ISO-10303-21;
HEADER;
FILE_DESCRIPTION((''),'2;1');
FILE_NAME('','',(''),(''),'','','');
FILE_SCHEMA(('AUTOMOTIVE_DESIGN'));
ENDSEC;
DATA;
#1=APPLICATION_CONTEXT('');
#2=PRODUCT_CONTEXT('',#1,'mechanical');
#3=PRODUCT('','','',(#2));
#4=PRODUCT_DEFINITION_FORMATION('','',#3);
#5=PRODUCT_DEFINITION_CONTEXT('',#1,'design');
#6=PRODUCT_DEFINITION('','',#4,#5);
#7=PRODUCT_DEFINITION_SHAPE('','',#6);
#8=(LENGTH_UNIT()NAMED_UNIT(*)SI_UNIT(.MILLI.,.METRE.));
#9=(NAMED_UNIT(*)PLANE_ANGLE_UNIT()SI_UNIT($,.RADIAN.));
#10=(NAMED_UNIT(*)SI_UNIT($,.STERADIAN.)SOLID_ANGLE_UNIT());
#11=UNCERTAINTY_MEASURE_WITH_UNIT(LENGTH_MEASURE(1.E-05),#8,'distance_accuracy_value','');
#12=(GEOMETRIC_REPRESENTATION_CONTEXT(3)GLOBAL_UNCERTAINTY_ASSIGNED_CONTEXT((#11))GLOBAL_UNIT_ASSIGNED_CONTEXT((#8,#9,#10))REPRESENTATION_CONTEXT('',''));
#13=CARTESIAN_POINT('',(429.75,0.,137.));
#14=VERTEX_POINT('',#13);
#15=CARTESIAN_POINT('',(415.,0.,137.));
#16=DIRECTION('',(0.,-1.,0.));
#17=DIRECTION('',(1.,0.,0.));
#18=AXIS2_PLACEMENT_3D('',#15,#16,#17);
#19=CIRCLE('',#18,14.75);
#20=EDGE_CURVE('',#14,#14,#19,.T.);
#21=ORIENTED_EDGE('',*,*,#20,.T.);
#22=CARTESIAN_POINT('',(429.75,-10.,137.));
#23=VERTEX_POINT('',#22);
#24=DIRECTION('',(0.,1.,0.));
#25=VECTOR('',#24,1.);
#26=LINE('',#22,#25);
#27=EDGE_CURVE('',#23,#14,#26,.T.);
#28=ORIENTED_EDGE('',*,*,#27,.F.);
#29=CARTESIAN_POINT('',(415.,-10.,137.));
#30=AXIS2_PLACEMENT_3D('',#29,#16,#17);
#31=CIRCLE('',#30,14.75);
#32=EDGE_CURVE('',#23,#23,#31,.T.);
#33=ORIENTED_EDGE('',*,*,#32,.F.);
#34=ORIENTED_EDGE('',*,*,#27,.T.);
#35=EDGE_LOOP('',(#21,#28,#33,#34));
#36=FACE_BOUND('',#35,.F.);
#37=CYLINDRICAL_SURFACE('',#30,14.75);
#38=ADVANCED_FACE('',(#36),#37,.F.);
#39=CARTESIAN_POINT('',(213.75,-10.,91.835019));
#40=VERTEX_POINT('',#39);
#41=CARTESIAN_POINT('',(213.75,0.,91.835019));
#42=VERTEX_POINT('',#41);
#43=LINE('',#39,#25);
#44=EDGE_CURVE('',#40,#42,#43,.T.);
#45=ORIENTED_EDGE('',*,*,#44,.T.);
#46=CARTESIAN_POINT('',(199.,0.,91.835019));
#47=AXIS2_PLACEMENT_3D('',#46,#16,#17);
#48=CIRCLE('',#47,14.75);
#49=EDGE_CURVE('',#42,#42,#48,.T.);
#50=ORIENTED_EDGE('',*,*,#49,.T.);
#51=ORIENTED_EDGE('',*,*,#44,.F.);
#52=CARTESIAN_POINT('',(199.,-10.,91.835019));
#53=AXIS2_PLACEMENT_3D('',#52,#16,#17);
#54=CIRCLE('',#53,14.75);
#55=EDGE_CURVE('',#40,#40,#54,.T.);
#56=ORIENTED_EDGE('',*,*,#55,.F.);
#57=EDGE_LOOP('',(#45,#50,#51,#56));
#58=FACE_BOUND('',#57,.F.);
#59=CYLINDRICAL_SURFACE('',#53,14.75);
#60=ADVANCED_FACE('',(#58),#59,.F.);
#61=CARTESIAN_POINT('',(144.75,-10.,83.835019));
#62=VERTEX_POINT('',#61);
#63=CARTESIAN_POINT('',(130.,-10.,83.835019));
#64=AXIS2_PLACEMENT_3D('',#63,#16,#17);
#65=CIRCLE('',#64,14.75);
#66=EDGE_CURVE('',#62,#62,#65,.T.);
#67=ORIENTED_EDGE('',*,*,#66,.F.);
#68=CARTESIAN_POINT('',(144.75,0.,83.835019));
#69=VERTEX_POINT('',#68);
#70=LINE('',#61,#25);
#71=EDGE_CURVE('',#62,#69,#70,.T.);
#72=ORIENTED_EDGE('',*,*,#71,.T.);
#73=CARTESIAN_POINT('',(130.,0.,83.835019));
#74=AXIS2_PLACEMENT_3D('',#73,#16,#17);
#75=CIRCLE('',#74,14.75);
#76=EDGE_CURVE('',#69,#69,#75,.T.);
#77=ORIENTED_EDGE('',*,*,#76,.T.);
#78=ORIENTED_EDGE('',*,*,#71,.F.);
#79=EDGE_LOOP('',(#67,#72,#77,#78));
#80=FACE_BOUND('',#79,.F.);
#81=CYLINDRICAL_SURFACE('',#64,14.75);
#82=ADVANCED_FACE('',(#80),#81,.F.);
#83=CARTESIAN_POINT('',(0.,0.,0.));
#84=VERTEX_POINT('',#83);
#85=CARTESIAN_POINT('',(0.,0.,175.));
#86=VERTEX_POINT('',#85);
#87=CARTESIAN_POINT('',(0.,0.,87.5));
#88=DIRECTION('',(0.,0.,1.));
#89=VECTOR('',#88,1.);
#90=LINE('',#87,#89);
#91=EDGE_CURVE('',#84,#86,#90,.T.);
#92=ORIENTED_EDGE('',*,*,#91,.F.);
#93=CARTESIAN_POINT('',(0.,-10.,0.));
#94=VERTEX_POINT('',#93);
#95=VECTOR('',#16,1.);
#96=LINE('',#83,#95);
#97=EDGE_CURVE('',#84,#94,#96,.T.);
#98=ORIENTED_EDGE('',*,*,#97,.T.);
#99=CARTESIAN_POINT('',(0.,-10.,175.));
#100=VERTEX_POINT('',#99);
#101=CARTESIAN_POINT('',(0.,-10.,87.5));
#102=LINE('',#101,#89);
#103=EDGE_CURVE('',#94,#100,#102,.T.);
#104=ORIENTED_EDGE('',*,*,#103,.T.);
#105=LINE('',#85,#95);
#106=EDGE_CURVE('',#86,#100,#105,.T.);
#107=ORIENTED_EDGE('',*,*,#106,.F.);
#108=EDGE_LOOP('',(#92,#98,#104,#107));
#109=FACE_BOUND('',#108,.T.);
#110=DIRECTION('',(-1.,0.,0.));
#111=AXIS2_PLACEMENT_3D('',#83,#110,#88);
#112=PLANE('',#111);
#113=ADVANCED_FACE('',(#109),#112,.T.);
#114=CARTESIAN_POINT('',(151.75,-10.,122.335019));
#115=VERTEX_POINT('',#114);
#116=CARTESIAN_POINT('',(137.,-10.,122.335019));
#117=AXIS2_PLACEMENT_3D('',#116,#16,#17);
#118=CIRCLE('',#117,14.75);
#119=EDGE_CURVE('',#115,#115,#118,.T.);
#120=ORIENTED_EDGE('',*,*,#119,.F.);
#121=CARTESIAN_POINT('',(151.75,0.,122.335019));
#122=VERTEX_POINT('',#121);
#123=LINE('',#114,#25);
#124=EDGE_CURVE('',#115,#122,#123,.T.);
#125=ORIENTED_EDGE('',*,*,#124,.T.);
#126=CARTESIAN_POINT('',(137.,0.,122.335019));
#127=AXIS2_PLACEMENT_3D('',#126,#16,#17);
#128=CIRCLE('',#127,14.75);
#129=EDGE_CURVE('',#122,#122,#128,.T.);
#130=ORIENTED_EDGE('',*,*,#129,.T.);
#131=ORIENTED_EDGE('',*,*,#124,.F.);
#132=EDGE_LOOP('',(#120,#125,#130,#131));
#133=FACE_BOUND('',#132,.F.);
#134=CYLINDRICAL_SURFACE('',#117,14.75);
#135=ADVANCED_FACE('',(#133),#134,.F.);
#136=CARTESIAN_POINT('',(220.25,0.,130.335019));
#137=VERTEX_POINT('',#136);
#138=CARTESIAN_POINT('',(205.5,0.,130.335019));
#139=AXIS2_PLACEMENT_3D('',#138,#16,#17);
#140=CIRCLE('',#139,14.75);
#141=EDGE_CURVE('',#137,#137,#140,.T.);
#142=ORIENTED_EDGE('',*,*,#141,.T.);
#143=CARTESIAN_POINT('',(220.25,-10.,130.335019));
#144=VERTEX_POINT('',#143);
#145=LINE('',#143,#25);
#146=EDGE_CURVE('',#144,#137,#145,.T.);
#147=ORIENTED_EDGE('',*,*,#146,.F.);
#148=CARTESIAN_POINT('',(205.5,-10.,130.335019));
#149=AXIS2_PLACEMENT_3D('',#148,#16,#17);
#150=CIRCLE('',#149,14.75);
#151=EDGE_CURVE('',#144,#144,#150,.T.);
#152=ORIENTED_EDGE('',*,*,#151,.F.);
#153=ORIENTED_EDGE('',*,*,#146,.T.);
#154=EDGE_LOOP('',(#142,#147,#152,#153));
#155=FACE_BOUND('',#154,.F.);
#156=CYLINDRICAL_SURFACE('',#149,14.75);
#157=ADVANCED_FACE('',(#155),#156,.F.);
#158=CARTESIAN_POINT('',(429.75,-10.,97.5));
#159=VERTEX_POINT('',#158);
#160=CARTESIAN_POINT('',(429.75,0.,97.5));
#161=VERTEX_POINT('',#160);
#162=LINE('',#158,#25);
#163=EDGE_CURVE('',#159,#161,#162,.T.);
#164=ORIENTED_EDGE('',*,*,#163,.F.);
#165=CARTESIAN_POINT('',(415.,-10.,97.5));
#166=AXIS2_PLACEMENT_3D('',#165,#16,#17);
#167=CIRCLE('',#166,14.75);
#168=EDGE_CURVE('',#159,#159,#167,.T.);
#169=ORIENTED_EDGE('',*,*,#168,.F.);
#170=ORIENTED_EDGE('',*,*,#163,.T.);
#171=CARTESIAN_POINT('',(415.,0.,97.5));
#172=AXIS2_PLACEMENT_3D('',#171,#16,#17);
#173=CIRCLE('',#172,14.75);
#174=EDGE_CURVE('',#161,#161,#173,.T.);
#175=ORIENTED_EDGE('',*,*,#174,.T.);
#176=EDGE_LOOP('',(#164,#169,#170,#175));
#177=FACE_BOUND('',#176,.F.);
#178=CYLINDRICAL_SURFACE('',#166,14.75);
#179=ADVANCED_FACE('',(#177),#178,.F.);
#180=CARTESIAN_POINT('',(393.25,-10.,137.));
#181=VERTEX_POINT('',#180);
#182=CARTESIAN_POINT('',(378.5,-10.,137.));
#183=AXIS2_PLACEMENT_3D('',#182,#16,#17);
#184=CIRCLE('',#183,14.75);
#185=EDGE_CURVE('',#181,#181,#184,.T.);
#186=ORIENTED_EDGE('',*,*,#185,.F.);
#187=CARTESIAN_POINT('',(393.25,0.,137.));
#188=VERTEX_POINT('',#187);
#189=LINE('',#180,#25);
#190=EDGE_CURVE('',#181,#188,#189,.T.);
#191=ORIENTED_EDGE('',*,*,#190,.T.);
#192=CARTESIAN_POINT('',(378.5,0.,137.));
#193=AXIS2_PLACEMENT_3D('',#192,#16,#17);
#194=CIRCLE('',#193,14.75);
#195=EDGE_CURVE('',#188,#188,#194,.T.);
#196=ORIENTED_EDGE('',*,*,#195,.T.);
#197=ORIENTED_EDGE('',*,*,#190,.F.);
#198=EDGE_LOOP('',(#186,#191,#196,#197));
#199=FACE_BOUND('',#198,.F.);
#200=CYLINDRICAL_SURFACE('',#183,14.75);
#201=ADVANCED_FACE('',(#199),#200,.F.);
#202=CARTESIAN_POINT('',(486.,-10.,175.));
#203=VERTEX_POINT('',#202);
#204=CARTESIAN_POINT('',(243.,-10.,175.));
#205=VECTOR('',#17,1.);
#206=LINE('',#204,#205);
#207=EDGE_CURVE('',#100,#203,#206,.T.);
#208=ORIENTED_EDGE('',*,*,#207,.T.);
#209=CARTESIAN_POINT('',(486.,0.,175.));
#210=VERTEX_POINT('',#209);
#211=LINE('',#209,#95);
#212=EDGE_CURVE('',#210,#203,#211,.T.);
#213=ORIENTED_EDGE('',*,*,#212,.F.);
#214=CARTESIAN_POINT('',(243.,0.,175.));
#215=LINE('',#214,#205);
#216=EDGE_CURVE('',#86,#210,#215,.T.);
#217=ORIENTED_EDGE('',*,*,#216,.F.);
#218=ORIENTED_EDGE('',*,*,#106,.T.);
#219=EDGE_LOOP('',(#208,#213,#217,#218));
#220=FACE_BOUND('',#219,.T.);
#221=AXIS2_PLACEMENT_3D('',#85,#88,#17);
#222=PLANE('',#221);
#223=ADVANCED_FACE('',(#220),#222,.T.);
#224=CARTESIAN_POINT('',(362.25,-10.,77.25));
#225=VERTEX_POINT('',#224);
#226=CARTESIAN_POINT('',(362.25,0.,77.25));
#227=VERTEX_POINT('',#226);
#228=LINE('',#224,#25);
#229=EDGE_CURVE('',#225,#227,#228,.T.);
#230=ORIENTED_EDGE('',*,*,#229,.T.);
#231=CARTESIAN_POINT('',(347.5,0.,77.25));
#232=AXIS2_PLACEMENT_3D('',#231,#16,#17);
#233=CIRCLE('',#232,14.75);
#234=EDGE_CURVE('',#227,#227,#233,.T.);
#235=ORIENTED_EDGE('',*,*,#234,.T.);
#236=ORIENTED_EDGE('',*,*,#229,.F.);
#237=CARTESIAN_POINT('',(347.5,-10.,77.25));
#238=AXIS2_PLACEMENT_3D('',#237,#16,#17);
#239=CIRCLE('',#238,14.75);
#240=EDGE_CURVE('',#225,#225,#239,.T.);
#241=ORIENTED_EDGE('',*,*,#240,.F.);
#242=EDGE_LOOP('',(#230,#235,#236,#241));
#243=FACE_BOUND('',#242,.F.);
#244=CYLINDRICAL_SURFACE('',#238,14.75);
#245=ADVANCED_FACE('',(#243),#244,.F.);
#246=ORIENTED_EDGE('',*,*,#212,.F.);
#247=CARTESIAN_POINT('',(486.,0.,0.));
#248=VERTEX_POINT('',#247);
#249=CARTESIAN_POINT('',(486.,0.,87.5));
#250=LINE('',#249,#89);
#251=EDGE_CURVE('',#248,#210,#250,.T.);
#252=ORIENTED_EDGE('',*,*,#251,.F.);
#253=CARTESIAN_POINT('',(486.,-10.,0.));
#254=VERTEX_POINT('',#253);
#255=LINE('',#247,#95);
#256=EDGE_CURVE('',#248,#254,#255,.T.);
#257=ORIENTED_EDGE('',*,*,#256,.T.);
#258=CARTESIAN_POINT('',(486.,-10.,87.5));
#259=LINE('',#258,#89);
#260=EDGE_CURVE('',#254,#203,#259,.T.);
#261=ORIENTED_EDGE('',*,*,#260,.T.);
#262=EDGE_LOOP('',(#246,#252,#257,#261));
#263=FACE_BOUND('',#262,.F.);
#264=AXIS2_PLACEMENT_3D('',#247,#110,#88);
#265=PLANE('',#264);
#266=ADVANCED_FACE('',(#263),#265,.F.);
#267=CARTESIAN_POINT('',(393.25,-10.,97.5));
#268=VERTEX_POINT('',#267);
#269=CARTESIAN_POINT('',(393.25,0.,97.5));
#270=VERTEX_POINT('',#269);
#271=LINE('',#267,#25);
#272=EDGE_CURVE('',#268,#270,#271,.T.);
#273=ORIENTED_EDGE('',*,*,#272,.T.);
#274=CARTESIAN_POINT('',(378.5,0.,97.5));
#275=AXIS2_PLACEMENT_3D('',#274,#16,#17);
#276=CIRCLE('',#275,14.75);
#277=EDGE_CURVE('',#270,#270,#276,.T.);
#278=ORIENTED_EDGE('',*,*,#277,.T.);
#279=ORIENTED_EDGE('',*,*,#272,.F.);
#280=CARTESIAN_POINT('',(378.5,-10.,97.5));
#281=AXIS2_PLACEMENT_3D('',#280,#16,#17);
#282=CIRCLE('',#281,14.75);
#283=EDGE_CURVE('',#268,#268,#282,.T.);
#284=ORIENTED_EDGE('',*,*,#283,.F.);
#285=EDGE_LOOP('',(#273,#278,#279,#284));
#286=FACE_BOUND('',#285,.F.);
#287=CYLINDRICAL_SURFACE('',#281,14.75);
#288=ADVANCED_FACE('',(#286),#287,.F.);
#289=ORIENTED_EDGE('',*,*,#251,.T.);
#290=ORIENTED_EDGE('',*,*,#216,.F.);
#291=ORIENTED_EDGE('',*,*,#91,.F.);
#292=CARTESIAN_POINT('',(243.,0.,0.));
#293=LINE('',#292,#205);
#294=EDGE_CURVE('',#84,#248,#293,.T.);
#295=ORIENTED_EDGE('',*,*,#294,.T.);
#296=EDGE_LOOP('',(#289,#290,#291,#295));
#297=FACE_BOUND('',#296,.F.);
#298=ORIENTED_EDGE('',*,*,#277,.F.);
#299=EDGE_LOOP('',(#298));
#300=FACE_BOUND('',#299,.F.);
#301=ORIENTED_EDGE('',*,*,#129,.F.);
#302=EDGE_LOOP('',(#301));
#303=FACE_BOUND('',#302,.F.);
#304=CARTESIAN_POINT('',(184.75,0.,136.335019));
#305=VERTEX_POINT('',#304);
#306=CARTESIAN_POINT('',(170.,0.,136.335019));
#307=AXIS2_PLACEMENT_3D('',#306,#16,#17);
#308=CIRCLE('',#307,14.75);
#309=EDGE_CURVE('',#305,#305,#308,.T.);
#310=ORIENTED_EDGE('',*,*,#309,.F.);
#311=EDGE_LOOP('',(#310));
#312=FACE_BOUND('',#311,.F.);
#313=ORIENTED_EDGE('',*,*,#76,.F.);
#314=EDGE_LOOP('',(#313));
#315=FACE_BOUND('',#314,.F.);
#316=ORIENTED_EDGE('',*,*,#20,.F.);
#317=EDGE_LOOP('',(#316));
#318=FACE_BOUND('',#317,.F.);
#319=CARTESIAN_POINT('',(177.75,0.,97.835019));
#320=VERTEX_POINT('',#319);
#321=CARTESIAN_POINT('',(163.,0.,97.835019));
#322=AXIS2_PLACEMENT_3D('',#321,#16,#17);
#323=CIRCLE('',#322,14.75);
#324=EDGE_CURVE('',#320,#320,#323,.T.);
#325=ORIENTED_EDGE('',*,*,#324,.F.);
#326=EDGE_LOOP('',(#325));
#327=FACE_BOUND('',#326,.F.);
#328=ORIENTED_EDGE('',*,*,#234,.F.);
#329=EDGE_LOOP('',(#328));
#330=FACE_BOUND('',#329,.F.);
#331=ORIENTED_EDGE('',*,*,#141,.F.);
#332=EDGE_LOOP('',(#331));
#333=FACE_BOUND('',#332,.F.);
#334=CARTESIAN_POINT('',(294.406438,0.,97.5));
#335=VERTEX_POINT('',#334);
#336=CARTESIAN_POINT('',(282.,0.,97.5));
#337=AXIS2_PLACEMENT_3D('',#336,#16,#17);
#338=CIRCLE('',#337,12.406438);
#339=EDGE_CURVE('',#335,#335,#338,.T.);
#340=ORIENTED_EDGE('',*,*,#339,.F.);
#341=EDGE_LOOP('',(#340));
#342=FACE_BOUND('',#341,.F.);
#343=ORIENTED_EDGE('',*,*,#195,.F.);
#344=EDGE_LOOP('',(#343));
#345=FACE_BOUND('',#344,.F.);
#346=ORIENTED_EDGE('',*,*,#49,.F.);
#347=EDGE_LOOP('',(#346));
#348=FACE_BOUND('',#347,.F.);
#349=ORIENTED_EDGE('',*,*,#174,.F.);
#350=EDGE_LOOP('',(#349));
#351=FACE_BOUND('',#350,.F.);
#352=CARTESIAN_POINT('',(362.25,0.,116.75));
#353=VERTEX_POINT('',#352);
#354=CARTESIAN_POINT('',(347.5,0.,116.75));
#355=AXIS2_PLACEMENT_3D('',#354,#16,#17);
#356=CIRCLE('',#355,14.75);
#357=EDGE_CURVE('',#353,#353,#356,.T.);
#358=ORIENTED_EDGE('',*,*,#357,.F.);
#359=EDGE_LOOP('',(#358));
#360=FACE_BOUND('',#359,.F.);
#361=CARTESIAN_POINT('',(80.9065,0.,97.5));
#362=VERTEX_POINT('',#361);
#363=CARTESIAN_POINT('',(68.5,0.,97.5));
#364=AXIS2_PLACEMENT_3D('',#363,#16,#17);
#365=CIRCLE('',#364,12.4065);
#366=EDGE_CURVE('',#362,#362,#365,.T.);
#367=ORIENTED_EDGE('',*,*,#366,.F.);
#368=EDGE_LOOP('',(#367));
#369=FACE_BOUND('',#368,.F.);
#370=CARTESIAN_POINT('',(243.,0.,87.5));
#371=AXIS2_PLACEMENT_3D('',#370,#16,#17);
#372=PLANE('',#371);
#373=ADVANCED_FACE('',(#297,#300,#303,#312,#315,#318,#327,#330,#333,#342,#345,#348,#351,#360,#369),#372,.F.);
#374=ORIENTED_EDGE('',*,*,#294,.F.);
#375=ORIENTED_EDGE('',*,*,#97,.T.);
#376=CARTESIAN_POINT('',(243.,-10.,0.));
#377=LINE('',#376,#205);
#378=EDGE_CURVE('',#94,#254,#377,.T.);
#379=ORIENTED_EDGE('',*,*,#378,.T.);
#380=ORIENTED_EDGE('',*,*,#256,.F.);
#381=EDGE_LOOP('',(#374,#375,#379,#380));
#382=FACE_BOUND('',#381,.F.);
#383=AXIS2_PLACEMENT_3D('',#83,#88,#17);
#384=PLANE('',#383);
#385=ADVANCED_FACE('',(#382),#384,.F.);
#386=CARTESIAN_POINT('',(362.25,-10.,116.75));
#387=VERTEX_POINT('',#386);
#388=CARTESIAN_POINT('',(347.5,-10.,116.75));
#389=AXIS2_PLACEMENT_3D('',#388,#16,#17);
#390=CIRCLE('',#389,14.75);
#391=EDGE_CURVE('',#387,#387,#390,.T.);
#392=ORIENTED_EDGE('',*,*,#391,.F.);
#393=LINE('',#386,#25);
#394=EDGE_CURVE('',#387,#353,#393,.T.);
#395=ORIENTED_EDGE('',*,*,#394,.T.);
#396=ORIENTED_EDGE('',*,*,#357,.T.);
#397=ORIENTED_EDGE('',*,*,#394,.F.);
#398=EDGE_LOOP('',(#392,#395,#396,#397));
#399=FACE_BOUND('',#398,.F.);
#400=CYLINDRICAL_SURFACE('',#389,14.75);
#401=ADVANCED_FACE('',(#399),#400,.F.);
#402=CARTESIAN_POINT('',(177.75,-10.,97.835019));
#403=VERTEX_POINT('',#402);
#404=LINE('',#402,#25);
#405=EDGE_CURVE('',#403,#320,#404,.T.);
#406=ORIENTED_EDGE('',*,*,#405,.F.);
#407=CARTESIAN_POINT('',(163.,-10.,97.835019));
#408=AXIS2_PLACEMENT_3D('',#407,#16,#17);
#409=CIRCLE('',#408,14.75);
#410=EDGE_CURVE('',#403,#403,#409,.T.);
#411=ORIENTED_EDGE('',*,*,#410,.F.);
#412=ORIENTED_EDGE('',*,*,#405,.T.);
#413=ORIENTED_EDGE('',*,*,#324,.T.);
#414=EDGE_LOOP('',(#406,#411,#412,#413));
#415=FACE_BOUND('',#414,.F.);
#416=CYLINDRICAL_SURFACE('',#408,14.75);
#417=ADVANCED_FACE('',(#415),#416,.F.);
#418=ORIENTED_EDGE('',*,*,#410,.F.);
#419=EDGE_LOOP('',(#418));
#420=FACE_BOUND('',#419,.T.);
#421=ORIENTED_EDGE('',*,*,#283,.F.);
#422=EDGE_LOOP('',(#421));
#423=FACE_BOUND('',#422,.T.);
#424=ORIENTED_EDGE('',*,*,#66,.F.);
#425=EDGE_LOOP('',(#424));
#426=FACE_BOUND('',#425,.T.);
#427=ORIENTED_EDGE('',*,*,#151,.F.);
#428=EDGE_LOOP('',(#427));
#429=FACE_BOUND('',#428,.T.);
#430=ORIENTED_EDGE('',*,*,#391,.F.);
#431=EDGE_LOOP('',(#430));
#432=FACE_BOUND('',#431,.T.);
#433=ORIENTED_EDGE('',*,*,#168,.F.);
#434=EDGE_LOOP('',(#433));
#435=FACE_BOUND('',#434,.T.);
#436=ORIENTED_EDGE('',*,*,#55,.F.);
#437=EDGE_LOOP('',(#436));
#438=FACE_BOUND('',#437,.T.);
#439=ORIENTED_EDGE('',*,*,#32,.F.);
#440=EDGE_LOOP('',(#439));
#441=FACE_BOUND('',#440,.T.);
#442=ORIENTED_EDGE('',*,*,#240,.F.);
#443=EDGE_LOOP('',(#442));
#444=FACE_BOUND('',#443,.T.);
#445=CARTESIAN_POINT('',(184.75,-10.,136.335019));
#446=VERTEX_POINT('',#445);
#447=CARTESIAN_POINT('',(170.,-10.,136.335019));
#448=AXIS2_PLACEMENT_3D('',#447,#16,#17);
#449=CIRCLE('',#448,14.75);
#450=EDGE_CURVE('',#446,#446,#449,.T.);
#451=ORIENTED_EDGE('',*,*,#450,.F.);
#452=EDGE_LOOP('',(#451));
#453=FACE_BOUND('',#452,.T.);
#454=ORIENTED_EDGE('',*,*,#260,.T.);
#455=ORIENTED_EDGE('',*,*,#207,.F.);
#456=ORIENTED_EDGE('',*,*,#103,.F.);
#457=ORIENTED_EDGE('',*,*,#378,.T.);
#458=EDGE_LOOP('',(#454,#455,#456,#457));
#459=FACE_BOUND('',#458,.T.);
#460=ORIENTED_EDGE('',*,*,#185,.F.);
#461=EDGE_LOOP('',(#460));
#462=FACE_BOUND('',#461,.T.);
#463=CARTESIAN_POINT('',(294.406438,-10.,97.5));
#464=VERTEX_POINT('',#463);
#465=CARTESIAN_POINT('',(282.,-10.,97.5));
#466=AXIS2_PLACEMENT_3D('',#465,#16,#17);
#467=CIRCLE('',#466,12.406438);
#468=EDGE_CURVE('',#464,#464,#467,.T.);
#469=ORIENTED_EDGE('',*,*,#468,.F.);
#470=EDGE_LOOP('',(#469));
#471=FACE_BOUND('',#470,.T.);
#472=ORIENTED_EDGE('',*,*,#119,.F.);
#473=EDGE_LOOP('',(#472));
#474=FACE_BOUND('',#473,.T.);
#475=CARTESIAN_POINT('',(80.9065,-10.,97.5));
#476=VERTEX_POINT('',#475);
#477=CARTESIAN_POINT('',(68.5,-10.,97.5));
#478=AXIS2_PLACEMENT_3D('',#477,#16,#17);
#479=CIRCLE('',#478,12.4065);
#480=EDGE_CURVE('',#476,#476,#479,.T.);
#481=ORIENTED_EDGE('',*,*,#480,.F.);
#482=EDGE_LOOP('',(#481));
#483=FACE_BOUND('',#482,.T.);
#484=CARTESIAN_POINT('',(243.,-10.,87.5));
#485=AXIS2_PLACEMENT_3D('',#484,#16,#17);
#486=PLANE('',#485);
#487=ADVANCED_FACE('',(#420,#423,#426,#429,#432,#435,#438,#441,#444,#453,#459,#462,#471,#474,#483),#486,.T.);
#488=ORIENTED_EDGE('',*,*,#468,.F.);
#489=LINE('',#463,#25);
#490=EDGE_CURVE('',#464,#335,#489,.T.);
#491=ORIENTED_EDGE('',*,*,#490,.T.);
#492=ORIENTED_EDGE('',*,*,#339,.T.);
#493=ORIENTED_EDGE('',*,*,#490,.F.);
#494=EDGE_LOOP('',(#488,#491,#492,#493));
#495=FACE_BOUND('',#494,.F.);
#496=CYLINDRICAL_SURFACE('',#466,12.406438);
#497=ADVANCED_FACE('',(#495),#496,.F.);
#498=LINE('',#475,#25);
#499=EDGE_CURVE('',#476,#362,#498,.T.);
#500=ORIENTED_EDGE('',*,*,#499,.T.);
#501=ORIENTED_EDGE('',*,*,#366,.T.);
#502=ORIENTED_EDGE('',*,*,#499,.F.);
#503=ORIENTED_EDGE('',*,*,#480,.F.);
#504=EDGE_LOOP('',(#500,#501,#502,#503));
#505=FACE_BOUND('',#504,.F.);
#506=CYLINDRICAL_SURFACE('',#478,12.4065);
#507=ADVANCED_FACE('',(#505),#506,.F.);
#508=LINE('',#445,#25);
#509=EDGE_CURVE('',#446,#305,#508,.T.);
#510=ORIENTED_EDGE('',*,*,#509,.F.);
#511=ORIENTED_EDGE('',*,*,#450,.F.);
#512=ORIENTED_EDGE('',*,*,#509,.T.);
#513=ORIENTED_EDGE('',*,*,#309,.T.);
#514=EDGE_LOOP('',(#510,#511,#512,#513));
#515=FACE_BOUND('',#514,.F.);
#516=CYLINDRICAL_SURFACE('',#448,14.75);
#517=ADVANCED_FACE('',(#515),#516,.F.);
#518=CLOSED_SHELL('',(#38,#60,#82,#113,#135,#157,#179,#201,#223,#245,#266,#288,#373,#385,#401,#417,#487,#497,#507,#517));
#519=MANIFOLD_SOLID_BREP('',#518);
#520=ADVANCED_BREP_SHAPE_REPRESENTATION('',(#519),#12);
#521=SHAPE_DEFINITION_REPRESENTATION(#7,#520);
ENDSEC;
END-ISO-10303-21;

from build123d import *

# Parameters (mm, degrees)
F0_W     = 486
F0_H     = 175
F1_DEPTH = 10
F5_R     = 14.75
F5_R_2   = 12.4064380464
F7_DEPTH = 25
F3_R     = 14.75
F3_R_2   = 12.4065
F8_DEPTH = 25


# Not quite as in the source:
# - a feature names something its author has since deleted; it is built from what else it names


with BuildPart() as f1:
    # F0 (on Front) → F1 (new body)
    with BuildSketch(Plane.XZ):
        with Locations((243, 87.5)):
            Rectangle(F0_W, F0_H)
    extrude(amount=F1_DEPTH)

    # F5 (on face) → F7 (cut)
    with BuildSketch(Plane.XZ.offset(10)):
        with Locations((347.5, 116.75)):
            Circle(F5_R)
        with Locations((378.5, 137)):
            Circle(F5_R)
        with Locations((415, 137)):
            Circle(F5_R)
        with Locations((415, 97.5)):
            Circle(F5_R)
        with Locations((378.5, 97.5)):
            Circle(F5_R)
        with Locations((347.5, 77.25)):
            Circle(F5_R)
        with Locations((282, 97.5)):
            Circle(F5_R_2)
    extrude(amount=-F7_DEPTH, mode=Mode.SUBTRACT)

    # F3 (on face) → F8 (cut)
    with BuildSketch(Plane.XZ.offset(10)):
        with Locations((170, 136.3350188136)):
            Circle(F3_R)
        with Locations((205.5, 130.3350188136)):
            Circle(F3_R)
        with Locations((199, 91.8350188136)):
            Circle(F3_R)
        with Locations((163, 97.8350188136)):
            Circle(F3_R)
        with Locations((130, 83.8350188136)):
            Circle(F3_R)
        with Locations((137, 122.3350188136)):
            Circle(F3_R)
        with Locations((68.5, 97.5)):
            Circle(F3_R_2)
    extrude(amount=-F8_DEPTH, mode=Mode.SUBTRACT)


solid = f1.part
